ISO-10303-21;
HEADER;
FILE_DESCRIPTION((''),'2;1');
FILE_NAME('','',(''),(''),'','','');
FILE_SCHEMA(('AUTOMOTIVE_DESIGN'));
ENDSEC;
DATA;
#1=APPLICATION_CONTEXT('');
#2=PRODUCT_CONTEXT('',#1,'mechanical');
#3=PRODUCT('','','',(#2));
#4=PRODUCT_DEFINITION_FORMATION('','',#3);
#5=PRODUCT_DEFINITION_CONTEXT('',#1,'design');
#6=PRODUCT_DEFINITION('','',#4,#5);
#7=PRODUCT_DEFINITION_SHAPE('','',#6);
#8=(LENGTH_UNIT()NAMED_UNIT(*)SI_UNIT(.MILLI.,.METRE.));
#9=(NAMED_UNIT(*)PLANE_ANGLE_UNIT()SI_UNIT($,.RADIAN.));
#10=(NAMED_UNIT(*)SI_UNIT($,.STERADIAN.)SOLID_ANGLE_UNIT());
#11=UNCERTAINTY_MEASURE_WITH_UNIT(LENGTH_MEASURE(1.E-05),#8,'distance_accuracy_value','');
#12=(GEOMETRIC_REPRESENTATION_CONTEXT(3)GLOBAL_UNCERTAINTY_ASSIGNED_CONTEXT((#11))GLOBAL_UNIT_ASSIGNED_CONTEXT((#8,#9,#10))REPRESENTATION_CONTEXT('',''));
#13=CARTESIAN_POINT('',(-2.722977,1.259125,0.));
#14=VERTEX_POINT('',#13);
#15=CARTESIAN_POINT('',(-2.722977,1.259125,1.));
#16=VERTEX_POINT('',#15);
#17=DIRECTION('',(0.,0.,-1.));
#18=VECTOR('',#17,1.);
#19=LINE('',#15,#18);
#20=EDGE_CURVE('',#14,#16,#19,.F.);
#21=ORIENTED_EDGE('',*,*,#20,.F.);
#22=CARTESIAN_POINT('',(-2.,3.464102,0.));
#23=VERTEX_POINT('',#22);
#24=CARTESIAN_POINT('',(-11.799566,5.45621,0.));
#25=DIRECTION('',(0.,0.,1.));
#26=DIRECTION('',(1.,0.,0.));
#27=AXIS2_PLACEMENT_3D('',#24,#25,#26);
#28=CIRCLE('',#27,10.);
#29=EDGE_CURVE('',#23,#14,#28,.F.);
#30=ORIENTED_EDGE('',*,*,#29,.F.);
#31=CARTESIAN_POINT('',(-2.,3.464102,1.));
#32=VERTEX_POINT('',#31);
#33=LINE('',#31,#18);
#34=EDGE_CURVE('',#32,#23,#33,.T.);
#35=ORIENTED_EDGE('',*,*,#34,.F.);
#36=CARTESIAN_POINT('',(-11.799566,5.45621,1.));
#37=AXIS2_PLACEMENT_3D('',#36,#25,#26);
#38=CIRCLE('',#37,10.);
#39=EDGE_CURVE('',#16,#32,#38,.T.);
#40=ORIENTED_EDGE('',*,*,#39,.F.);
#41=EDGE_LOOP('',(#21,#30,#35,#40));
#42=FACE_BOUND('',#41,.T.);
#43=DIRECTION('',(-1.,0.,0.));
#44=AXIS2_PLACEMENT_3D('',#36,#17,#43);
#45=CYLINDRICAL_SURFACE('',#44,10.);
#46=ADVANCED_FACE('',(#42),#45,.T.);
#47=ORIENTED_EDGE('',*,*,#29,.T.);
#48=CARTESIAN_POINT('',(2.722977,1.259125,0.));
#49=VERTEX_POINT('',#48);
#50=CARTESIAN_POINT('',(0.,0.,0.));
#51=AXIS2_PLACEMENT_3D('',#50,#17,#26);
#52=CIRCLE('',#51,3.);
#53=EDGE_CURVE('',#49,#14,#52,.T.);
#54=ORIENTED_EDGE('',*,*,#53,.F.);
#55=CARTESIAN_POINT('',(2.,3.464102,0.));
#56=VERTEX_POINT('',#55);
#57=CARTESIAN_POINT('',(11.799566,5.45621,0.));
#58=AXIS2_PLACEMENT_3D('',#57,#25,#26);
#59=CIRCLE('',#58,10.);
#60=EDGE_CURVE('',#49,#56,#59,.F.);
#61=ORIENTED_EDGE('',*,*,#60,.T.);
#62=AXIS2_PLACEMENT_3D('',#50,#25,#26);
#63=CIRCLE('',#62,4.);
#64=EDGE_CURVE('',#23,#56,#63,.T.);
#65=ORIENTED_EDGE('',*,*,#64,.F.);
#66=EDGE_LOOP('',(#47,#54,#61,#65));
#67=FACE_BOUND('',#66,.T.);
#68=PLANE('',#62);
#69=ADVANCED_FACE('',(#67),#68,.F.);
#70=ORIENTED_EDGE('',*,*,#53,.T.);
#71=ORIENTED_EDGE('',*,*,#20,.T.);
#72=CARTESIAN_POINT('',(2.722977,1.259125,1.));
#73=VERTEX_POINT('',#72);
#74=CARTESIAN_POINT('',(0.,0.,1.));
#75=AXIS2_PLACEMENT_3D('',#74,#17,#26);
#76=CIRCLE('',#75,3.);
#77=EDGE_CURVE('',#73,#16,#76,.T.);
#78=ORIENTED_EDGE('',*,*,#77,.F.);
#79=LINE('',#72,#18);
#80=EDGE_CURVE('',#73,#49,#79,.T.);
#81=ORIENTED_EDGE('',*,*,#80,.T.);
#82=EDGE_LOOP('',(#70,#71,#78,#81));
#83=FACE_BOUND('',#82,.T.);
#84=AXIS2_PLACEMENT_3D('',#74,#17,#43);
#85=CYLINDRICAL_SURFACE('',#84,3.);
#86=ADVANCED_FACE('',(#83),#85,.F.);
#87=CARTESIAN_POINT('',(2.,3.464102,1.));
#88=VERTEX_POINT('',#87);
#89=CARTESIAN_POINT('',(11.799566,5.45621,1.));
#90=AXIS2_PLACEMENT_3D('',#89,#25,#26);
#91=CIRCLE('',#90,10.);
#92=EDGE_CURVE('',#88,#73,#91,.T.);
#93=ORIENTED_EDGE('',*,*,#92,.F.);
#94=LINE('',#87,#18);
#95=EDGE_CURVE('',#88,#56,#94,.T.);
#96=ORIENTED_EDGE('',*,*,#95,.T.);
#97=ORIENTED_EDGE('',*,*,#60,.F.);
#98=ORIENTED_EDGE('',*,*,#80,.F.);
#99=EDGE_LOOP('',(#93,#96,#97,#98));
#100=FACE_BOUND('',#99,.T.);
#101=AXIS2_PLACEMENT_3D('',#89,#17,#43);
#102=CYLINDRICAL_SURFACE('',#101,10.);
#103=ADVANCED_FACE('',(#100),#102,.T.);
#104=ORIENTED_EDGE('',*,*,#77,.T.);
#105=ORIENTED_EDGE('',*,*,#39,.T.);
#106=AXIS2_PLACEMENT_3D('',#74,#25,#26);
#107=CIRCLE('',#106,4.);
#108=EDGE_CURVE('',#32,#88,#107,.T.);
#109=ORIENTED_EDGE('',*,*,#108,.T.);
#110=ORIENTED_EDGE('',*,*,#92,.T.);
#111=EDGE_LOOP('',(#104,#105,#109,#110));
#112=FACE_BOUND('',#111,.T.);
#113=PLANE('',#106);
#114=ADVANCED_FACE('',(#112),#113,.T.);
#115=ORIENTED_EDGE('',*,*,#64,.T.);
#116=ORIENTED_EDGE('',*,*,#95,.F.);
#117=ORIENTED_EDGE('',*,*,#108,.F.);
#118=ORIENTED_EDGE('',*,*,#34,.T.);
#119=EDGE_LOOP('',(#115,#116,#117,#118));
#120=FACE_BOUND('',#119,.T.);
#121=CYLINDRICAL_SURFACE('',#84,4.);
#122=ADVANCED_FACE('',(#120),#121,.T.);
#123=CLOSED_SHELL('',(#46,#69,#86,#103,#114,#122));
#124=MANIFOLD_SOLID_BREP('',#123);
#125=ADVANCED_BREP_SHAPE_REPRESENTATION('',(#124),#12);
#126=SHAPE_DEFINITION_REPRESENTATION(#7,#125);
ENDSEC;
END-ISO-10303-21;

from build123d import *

# Parameters (mm, degrees)
RESSALTO_EXTRUS_O1_DEPTH = 1
FILETE1_R                = 10


with BuildPart() as part:
    # Esboço1 → Ressalto-extrusão1 (new body)
    with BuildSketch(Plane.XY):
        with BuildLine():
            Line((-2, 2.236067977), (-2, 3.464101615))
            ThreePointArc((-2, 3.464101615), (0, -4), (2, 3.464101615))
            Line((2, 3.464101615), (2, 2.236067977))
            ThreePointArc((2, 2.236067977), (0, -3), (-2, 2.236067977))
        make_face()
    extrude(amount=RESSALTO_EXTRUS_O1_DEPTH)

    # Filete1
    # the kernel refuses this fillet: 10 mm, written as the material it takes off along each edge
    with BuildSketch(Plane(origin=(2, 2.236067977, -3.070084094), x_dir=(0, 1, 0), z_dir=(0, 0, 1))) as filete1_piece_1:
        with BuildLine():
            CenterArc((3.220142371, -9.79956646), FILETE1_R, 101.490816856, 13.325367656)
            Line((-0.976942512, -0.722976875), (-1.06088421, -0.541445084))
            ThreePointArc((-1.06088421, -0.541445084), (-0.570448886, -0.250713896), (-0.149071199, 0.133333333))
            Line((-0.149071199, 0.133333333), (0, 0.2))
            ThreePointArc((0, 0.2), (0.614016819, 0.2), (1.188191463, 0.195991329))
            Line((1.188191463, 0.195991329), (1.228033638, 0))
        make_face()
    extrude(amount=7.140168188, mode=Mode.SUBTRACT)
    with BuildSketch(Plane(origin=(-2, 2.236067977, -3.070084094), x_dir=(0, 1, 0), z_dir=(0, 0, 1))) as filete1_piece_2:
        with BuildLine():
            CenterArc((3.220142371, 9.79956646), FILETE1_R, 245.183815488, 13.325367656)
            Line((-0.976942512, 0.722976875), (-1.06088421, 0.541445084))
            ThreePointArc((-1.06088421, 0.541445084), (-0.570448886, 0.250713896), (-0.149071199, -0.133333333))
            Line((-0.149071199, -0.133333333), (0, -0.2))
            ThreePointArc((0, -0.2), (0.614016819, -0.2), (1.188191463, -0.195991329))
            Line((1.188191463, -0.195991329), (1.228033638, 0))
        make_face()
    extrude(amount=7.140168188, mode=Mode.SUBTRACT)


solid = part.part
